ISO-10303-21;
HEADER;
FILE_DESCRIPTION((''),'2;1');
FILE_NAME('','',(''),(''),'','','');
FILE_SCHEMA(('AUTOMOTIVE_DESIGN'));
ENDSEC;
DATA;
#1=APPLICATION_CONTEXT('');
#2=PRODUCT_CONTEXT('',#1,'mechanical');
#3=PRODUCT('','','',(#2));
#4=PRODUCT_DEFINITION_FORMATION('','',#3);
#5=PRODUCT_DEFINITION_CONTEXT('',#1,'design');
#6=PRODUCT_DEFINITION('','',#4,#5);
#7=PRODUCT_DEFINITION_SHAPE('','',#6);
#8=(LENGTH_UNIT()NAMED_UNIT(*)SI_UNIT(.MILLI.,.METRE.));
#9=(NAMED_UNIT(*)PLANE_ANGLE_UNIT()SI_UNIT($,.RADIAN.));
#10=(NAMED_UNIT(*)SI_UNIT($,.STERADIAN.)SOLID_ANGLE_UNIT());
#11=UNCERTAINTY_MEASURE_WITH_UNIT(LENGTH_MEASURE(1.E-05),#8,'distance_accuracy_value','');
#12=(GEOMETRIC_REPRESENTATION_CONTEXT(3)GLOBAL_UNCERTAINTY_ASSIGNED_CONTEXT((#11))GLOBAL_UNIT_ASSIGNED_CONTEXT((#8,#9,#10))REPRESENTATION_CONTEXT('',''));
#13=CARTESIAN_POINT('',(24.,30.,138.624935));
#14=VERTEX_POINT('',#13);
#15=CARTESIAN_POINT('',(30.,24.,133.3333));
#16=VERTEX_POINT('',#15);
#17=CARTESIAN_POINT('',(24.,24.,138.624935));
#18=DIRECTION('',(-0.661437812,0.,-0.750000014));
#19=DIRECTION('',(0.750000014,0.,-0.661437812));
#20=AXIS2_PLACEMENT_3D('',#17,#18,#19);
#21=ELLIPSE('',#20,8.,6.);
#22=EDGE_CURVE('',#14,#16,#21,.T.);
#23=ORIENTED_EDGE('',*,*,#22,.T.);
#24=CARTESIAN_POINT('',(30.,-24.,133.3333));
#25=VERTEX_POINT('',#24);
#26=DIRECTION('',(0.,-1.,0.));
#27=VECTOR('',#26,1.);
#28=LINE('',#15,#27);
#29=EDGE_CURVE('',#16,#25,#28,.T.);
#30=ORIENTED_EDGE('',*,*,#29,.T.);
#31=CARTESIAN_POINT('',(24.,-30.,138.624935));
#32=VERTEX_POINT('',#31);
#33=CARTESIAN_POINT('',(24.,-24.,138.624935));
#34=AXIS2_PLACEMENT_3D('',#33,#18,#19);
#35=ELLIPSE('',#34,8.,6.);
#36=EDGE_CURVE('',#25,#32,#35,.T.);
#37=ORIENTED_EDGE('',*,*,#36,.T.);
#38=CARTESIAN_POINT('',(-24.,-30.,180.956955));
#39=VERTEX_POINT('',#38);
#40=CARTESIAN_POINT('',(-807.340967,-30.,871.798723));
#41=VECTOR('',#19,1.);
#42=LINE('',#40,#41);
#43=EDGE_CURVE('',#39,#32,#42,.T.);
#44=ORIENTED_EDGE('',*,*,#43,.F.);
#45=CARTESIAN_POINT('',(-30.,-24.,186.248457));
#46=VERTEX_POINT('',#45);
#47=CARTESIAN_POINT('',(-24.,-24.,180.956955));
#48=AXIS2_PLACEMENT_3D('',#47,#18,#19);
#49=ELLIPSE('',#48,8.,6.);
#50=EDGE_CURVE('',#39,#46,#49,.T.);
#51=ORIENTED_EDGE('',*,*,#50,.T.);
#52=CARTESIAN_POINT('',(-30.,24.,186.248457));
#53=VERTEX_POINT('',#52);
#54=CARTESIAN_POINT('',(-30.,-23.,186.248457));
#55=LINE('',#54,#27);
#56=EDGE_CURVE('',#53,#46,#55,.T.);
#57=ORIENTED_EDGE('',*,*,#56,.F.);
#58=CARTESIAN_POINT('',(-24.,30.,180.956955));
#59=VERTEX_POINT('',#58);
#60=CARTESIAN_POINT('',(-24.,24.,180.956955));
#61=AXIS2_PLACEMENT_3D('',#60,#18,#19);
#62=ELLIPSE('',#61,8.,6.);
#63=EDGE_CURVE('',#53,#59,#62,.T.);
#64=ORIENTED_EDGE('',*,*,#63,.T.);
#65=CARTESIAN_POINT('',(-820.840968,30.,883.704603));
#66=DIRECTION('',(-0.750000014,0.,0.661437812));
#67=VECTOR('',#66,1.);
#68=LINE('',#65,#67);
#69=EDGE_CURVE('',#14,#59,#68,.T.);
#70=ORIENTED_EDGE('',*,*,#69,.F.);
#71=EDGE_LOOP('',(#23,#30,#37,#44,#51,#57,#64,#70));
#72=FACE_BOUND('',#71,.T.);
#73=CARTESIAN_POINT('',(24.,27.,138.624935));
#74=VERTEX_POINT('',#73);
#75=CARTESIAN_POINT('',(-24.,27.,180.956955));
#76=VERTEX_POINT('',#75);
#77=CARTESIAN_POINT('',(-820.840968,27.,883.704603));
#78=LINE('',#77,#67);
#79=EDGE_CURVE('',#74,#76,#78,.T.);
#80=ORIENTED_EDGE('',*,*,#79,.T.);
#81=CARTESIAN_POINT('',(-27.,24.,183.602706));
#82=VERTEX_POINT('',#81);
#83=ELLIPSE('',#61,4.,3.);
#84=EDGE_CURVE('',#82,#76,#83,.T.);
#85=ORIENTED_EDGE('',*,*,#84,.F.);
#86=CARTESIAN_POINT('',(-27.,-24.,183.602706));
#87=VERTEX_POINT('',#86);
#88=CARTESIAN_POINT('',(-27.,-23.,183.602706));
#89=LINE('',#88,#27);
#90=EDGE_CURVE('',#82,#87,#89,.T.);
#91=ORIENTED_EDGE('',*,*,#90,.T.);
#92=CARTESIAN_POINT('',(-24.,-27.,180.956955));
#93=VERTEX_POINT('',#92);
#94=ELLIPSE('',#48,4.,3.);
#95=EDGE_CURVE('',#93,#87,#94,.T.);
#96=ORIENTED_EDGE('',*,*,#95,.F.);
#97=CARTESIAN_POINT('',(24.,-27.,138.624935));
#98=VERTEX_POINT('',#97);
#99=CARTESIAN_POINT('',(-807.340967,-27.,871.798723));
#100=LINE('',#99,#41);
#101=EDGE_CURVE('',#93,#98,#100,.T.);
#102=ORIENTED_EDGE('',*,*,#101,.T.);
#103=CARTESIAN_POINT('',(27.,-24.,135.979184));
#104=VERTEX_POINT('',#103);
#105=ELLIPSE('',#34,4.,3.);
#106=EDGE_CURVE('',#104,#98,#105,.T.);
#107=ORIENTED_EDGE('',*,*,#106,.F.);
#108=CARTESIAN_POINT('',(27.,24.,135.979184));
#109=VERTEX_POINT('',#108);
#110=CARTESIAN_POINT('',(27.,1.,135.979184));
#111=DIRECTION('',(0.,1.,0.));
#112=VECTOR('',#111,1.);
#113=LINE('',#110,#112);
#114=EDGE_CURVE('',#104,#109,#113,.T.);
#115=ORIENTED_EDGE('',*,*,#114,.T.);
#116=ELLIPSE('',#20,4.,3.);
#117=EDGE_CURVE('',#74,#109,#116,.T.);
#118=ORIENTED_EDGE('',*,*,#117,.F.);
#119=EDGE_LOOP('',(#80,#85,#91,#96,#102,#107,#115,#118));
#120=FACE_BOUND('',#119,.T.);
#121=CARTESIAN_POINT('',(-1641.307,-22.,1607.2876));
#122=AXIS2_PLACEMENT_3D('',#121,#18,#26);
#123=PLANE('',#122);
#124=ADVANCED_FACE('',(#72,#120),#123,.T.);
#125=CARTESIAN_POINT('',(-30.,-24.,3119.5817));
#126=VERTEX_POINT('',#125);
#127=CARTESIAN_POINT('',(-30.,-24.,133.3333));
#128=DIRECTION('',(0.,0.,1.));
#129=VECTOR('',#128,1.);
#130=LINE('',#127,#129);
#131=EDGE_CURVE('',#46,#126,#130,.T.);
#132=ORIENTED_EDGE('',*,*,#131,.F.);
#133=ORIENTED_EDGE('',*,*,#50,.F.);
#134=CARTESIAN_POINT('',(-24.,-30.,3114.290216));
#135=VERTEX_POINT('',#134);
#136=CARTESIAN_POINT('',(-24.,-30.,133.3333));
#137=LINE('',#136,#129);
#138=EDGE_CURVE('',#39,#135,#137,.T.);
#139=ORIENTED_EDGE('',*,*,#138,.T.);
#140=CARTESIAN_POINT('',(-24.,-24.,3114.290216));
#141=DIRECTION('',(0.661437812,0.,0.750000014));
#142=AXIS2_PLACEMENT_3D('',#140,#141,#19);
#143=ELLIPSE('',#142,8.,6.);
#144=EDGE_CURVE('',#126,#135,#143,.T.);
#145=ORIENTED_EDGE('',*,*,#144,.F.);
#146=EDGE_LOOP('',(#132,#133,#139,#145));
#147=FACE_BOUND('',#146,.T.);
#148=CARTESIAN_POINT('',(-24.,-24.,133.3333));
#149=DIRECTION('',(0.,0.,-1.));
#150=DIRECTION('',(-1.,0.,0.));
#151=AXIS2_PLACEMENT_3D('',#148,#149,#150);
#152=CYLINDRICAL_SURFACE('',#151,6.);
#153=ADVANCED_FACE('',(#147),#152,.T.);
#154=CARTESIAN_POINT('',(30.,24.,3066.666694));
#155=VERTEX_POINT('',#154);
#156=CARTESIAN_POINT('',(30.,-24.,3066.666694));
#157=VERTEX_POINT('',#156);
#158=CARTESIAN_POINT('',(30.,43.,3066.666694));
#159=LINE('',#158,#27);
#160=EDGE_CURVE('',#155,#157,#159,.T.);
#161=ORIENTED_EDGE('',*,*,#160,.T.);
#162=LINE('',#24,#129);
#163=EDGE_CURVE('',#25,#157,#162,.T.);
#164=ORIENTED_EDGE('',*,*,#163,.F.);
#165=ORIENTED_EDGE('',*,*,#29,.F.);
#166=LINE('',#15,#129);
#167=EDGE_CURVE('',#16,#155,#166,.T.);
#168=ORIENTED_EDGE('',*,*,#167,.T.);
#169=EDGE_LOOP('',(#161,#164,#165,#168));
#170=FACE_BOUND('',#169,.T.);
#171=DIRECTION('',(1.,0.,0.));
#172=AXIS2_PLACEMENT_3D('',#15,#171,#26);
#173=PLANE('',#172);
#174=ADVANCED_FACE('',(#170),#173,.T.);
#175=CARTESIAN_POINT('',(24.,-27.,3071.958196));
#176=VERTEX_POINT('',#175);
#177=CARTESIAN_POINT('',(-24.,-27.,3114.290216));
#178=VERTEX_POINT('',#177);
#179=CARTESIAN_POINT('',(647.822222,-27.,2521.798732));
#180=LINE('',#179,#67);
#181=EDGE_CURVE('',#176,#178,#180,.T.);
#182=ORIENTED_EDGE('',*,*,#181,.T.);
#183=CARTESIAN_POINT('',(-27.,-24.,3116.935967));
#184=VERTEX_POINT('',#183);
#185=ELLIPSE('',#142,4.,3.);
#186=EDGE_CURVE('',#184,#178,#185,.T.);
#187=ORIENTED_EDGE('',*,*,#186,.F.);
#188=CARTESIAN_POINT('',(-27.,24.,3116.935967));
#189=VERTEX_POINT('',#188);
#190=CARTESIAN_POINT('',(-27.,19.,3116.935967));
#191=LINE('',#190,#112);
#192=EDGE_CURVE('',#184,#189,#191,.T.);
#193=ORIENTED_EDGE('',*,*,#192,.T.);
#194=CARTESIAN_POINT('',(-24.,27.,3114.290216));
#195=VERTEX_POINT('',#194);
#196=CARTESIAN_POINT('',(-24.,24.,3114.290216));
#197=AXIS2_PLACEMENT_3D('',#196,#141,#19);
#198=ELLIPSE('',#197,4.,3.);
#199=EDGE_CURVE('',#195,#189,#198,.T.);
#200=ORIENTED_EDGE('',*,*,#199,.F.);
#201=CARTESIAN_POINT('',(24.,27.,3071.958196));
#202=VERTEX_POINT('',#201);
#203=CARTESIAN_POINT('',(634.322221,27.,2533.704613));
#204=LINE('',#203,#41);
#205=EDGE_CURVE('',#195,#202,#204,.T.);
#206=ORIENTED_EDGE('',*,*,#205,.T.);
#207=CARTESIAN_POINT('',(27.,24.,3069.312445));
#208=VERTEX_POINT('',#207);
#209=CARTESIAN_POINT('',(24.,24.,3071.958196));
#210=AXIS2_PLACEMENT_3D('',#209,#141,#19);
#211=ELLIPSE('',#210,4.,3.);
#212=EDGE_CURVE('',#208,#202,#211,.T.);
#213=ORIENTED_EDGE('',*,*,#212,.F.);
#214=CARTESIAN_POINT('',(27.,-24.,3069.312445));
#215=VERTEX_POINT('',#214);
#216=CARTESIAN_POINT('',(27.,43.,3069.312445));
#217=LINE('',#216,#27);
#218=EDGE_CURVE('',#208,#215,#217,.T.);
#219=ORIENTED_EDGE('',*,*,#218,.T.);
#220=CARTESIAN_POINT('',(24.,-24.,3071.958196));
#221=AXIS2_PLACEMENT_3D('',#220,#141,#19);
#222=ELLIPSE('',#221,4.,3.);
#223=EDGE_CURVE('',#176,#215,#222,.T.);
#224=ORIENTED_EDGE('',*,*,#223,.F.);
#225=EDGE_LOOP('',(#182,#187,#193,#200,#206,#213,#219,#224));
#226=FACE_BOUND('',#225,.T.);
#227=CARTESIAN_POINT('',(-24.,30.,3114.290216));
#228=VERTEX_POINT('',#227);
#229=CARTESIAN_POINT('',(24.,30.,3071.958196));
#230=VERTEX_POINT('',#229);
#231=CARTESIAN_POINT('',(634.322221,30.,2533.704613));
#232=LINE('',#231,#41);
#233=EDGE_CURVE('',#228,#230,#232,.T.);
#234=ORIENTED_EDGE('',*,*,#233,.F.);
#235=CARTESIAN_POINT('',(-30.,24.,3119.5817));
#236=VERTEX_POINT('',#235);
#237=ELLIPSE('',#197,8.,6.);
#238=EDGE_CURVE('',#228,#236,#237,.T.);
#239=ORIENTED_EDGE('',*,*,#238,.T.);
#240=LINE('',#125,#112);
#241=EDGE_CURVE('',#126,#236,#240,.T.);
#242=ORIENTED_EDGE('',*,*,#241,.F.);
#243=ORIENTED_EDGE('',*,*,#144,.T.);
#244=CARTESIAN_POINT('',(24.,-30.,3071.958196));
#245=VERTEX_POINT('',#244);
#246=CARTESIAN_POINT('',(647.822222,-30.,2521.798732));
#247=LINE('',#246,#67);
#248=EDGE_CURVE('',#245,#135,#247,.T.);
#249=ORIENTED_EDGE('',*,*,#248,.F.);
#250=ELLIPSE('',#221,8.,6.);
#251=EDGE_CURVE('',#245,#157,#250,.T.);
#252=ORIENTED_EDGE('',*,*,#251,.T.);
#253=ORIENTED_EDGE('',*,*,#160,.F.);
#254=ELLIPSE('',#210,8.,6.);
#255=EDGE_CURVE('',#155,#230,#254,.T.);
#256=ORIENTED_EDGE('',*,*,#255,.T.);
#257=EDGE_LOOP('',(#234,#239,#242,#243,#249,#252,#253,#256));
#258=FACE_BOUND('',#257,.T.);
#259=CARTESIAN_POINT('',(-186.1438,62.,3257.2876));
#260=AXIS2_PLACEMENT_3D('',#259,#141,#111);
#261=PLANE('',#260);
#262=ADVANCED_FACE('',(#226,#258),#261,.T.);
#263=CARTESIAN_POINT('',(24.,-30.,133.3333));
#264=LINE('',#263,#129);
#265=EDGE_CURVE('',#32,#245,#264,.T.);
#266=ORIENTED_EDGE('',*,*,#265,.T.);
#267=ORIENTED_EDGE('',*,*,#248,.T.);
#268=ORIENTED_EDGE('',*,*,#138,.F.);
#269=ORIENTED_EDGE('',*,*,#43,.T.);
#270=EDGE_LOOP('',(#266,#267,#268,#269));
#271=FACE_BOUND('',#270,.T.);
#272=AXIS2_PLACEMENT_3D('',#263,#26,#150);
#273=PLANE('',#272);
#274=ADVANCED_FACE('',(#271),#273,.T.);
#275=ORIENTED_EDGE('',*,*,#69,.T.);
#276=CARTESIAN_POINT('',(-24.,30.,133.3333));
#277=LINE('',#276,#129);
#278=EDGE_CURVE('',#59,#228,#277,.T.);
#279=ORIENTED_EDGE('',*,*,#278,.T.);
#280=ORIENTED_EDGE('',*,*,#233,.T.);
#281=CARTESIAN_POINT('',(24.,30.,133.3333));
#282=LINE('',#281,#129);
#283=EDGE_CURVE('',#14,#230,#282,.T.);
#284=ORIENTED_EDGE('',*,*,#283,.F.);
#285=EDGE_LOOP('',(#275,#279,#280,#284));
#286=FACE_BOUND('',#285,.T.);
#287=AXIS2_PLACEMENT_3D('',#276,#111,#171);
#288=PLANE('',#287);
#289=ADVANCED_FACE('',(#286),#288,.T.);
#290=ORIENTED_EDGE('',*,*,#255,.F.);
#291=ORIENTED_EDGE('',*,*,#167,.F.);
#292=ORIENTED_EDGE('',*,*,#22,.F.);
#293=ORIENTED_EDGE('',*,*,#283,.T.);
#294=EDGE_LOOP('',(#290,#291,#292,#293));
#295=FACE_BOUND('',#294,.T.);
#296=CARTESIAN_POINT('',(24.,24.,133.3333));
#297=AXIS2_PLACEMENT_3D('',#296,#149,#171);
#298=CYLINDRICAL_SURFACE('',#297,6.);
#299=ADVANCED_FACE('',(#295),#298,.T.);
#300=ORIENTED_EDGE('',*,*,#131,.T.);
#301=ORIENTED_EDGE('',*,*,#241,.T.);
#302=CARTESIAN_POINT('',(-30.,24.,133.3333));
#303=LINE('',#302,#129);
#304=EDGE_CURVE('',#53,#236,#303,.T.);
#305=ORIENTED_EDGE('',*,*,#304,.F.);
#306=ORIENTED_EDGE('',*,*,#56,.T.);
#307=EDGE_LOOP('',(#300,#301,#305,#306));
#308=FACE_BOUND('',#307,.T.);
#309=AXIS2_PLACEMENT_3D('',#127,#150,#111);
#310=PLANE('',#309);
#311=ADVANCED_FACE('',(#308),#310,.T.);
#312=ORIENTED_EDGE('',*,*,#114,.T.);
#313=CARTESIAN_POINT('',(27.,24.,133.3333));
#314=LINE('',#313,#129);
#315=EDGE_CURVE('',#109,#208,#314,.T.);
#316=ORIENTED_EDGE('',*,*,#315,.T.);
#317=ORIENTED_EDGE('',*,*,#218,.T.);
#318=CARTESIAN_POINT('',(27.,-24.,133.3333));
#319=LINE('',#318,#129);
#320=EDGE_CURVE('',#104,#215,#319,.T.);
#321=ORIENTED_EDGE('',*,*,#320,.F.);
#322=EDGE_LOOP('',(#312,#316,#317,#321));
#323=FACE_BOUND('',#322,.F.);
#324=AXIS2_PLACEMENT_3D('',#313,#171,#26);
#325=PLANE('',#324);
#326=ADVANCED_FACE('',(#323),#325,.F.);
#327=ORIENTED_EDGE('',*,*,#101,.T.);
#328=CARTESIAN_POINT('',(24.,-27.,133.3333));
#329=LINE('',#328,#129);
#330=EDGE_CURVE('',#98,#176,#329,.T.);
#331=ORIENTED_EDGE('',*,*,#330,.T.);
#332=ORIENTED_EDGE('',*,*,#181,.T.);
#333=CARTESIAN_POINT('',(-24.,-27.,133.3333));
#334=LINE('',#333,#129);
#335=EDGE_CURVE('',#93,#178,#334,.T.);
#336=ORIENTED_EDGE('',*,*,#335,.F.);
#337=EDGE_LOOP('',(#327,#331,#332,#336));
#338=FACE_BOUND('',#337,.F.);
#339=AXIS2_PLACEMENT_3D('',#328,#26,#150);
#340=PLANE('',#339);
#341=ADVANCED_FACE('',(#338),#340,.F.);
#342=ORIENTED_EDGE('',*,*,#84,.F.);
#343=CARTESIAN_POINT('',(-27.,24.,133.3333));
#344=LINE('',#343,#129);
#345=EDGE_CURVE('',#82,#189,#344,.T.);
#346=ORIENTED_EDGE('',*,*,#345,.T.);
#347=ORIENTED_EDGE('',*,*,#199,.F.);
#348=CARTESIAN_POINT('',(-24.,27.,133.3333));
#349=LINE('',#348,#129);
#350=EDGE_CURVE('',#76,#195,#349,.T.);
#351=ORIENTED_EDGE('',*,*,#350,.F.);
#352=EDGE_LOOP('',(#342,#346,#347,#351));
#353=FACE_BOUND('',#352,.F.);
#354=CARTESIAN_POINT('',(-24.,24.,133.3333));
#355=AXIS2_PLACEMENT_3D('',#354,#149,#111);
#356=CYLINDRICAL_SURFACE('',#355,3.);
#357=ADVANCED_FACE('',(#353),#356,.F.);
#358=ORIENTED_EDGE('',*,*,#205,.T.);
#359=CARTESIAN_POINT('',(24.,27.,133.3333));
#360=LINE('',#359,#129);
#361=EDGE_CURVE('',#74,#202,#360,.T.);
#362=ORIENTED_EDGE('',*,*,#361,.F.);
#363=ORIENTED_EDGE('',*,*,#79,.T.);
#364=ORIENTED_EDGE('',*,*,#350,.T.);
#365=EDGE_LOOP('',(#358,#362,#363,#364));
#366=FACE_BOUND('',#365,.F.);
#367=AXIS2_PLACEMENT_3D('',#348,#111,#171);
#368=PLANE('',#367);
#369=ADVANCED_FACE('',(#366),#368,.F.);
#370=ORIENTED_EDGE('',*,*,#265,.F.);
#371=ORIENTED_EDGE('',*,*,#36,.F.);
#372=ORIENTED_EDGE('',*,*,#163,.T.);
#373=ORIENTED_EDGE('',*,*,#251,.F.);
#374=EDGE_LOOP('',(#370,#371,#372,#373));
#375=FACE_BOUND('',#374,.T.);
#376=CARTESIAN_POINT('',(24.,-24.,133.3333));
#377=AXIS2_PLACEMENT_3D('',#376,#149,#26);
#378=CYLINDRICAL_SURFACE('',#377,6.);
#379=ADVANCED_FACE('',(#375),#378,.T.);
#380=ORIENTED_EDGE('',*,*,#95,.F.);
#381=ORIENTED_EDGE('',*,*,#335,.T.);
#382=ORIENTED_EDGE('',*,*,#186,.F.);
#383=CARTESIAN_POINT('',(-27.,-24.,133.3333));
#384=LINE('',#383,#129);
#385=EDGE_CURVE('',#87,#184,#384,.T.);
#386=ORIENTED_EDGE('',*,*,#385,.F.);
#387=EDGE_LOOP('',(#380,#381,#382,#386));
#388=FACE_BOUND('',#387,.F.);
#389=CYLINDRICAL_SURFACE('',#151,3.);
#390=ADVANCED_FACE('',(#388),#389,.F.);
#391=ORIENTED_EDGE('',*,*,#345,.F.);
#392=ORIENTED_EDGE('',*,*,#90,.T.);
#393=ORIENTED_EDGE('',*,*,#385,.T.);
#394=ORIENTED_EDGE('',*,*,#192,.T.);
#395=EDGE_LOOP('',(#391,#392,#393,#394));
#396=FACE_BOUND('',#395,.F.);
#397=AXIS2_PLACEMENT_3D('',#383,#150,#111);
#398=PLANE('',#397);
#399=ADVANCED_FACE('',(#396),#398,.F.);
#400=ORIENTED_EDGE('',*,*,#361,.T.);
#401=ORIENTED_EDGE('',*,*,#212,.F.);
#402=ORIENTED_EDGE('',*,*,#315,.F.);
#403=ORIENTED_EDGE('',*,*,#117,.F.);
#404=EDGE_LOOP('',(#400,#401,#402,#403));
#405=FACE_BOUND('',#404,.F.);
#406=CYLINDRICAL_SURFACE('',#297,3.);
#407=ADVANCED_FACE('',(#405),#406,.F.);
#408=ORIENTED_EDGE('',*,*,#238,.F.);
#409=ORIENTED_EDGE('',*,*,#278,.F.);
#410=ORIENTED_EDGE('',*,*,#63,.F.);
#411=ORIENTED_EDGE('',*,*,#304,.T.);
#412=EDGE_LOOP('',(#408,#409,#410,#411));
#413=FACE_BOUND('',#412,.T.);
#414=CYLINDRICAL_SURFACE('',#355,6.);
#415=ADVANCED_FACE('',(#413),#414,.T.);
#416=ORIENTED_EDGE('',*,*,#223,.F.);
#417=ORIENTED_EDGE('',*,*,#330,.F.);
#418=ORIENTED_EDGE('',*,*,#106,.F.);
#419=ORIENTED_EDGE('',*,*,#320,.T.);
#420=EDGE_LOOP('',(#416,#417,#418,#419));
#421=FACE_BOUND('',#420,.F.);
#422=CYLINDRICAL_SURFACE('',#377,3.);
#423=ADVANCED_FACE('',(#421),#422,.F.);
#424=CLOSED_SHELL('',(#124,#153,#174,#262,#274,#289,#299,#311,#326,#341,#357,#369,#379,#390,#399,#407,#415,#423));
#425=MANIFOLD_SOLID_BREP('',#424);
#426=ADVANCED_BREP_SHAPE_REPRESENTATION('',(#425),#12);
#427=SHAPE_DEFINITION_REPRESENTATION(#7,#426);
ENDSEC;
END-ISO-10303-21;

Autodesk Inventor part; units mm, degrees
ref_plane "Start Plane" through (0, 0, 133.3333) normal (0, 0, 1) x (1, 0, 0)
ref_plane "End Plane" through (0, 0, 3119.5817) normal (0, 0, 1) x (1, 0, 0)
sketch "Sketch" plane through (0, 0, 0) normal (0, 0, 1) x (1, 0, 0)
  line L0 (-30, -24) -> (-30, 24)
  line L1 (-24, 30) -> (24, 30)
  line L2 (30, 24) -> (30, -24)
  line L3 (24, -30) -> (-24, -30)
  arc A0 (-30, -24) -> (-24, -30) centre (-24, -24) ccw
  arc A1 (30, 24) -> (24, 30) centre (24, 24) ccw
  arc A2 (-24, 30) -> (-30, 24) centre (-24, 24) ccw
  arc A3 (24, -30) -> (30, -24) centre (24, -24) ccw
  arc A4 (-24, 27) -> (-27, 24) centre (-24, 24) ccw
  line L4 (-24, 27) -> (24, 27)
  arc A5 (27, 24) -> (24, 27) centre (24, 24) ccw
  line L5 (27, 24) -> (27, -24)
  arc A6 (24, -27) -> (27, -24) centre (24, -24) ccw
  line L6 (24, -27) -> (-24, -27)
  arc A7 (-27, -24) -> (-24, -27) centre (-24, -24) ccw
  line L7 (-27, -24) -> (-27, 24)
  line L8 (0, 43.7397) -> (0, -43.7397) construction
  line L9 (-43.7397, 0) -> (43.7397, 0) construction
  dimension "d7" = 6
  dimension "d9" = 60
  dimension "d11" = 60
  dimension "d12" = 3
  dimension "d15" = 30
  dimension "d16" = 30
extrude "Body" add sketch "Sketch" along normal up to surface (2986.2484 mm away) from surface at 133.3333
sketch "Sketch3" plane through (0, 0, 0) normal (0, 0, 1) x (1, 0, 0)
  line L0 (0, 0) -> (10, 0)
ref_plane "Work Plane3" through (0, 0, 0) normal (0, -1, 0) x (1, 0, 0)
ref_plane "Work Plane4" through (-186.1438, 62, 3257.2876) normal (0.6614378, 0, 0.75) x (0.75, 0, -0.6614378)
split "Split1" plane through (-186.1438, 62, 3257.2876) removes the side toward (0.6614378, 0, 0.75)
ref_plane "Work Plane5" through (-1641.307, -22, 1607.2876) normal (-0.6614378, 0, -0.75) x (-0.75, 0, 0.6614378)
split "Split2" plane through (-1641.307, -22, 1607.2876) removes the side toward (-0.6614378, 0, -0.75)
sketch "Sketch4" plane through (0, 0, 0) normal (0, -1, 0) x (1, 0, 0)
  line L0 (-2, 133.3333) -> (12, 133.3333) projected
  line L1 (-2, 3119.5817) -> (12, 3119.5817) projected
  dimension "d18" = 2986.2484
equation "\"d7\" = G_IR"
equation "\"d9\" = G_W"
equation "\"d11\" = G_H"
equation "\"d12\" = G_T"
equation "\"d15\" = 0.5 * d9"
equation "\"d16\" = 0.5 * d11"
equation "\"d3\" = G_L"
equation "\"G_W\" = 60"
equation "\"G_H\" = 60"
equation "\"G_T\" = 3"
equation "\"G_IR\" = 6"
equation "\"G_L\" = d18"
equation "\"G_OFFSET_START\" = -133.33333"
equation "\"G_OFFSET_END\" = -80.41831"
equation "\"d13\" = -G_OFFSET_START"
equation "\"d14\" = G_OFFSET_END + B_L"
equation "\"B_L\" = 3200"
properties part number "ISO 10799-2 - 60x60x3 - 2986,25" material "Steel, Mild"
